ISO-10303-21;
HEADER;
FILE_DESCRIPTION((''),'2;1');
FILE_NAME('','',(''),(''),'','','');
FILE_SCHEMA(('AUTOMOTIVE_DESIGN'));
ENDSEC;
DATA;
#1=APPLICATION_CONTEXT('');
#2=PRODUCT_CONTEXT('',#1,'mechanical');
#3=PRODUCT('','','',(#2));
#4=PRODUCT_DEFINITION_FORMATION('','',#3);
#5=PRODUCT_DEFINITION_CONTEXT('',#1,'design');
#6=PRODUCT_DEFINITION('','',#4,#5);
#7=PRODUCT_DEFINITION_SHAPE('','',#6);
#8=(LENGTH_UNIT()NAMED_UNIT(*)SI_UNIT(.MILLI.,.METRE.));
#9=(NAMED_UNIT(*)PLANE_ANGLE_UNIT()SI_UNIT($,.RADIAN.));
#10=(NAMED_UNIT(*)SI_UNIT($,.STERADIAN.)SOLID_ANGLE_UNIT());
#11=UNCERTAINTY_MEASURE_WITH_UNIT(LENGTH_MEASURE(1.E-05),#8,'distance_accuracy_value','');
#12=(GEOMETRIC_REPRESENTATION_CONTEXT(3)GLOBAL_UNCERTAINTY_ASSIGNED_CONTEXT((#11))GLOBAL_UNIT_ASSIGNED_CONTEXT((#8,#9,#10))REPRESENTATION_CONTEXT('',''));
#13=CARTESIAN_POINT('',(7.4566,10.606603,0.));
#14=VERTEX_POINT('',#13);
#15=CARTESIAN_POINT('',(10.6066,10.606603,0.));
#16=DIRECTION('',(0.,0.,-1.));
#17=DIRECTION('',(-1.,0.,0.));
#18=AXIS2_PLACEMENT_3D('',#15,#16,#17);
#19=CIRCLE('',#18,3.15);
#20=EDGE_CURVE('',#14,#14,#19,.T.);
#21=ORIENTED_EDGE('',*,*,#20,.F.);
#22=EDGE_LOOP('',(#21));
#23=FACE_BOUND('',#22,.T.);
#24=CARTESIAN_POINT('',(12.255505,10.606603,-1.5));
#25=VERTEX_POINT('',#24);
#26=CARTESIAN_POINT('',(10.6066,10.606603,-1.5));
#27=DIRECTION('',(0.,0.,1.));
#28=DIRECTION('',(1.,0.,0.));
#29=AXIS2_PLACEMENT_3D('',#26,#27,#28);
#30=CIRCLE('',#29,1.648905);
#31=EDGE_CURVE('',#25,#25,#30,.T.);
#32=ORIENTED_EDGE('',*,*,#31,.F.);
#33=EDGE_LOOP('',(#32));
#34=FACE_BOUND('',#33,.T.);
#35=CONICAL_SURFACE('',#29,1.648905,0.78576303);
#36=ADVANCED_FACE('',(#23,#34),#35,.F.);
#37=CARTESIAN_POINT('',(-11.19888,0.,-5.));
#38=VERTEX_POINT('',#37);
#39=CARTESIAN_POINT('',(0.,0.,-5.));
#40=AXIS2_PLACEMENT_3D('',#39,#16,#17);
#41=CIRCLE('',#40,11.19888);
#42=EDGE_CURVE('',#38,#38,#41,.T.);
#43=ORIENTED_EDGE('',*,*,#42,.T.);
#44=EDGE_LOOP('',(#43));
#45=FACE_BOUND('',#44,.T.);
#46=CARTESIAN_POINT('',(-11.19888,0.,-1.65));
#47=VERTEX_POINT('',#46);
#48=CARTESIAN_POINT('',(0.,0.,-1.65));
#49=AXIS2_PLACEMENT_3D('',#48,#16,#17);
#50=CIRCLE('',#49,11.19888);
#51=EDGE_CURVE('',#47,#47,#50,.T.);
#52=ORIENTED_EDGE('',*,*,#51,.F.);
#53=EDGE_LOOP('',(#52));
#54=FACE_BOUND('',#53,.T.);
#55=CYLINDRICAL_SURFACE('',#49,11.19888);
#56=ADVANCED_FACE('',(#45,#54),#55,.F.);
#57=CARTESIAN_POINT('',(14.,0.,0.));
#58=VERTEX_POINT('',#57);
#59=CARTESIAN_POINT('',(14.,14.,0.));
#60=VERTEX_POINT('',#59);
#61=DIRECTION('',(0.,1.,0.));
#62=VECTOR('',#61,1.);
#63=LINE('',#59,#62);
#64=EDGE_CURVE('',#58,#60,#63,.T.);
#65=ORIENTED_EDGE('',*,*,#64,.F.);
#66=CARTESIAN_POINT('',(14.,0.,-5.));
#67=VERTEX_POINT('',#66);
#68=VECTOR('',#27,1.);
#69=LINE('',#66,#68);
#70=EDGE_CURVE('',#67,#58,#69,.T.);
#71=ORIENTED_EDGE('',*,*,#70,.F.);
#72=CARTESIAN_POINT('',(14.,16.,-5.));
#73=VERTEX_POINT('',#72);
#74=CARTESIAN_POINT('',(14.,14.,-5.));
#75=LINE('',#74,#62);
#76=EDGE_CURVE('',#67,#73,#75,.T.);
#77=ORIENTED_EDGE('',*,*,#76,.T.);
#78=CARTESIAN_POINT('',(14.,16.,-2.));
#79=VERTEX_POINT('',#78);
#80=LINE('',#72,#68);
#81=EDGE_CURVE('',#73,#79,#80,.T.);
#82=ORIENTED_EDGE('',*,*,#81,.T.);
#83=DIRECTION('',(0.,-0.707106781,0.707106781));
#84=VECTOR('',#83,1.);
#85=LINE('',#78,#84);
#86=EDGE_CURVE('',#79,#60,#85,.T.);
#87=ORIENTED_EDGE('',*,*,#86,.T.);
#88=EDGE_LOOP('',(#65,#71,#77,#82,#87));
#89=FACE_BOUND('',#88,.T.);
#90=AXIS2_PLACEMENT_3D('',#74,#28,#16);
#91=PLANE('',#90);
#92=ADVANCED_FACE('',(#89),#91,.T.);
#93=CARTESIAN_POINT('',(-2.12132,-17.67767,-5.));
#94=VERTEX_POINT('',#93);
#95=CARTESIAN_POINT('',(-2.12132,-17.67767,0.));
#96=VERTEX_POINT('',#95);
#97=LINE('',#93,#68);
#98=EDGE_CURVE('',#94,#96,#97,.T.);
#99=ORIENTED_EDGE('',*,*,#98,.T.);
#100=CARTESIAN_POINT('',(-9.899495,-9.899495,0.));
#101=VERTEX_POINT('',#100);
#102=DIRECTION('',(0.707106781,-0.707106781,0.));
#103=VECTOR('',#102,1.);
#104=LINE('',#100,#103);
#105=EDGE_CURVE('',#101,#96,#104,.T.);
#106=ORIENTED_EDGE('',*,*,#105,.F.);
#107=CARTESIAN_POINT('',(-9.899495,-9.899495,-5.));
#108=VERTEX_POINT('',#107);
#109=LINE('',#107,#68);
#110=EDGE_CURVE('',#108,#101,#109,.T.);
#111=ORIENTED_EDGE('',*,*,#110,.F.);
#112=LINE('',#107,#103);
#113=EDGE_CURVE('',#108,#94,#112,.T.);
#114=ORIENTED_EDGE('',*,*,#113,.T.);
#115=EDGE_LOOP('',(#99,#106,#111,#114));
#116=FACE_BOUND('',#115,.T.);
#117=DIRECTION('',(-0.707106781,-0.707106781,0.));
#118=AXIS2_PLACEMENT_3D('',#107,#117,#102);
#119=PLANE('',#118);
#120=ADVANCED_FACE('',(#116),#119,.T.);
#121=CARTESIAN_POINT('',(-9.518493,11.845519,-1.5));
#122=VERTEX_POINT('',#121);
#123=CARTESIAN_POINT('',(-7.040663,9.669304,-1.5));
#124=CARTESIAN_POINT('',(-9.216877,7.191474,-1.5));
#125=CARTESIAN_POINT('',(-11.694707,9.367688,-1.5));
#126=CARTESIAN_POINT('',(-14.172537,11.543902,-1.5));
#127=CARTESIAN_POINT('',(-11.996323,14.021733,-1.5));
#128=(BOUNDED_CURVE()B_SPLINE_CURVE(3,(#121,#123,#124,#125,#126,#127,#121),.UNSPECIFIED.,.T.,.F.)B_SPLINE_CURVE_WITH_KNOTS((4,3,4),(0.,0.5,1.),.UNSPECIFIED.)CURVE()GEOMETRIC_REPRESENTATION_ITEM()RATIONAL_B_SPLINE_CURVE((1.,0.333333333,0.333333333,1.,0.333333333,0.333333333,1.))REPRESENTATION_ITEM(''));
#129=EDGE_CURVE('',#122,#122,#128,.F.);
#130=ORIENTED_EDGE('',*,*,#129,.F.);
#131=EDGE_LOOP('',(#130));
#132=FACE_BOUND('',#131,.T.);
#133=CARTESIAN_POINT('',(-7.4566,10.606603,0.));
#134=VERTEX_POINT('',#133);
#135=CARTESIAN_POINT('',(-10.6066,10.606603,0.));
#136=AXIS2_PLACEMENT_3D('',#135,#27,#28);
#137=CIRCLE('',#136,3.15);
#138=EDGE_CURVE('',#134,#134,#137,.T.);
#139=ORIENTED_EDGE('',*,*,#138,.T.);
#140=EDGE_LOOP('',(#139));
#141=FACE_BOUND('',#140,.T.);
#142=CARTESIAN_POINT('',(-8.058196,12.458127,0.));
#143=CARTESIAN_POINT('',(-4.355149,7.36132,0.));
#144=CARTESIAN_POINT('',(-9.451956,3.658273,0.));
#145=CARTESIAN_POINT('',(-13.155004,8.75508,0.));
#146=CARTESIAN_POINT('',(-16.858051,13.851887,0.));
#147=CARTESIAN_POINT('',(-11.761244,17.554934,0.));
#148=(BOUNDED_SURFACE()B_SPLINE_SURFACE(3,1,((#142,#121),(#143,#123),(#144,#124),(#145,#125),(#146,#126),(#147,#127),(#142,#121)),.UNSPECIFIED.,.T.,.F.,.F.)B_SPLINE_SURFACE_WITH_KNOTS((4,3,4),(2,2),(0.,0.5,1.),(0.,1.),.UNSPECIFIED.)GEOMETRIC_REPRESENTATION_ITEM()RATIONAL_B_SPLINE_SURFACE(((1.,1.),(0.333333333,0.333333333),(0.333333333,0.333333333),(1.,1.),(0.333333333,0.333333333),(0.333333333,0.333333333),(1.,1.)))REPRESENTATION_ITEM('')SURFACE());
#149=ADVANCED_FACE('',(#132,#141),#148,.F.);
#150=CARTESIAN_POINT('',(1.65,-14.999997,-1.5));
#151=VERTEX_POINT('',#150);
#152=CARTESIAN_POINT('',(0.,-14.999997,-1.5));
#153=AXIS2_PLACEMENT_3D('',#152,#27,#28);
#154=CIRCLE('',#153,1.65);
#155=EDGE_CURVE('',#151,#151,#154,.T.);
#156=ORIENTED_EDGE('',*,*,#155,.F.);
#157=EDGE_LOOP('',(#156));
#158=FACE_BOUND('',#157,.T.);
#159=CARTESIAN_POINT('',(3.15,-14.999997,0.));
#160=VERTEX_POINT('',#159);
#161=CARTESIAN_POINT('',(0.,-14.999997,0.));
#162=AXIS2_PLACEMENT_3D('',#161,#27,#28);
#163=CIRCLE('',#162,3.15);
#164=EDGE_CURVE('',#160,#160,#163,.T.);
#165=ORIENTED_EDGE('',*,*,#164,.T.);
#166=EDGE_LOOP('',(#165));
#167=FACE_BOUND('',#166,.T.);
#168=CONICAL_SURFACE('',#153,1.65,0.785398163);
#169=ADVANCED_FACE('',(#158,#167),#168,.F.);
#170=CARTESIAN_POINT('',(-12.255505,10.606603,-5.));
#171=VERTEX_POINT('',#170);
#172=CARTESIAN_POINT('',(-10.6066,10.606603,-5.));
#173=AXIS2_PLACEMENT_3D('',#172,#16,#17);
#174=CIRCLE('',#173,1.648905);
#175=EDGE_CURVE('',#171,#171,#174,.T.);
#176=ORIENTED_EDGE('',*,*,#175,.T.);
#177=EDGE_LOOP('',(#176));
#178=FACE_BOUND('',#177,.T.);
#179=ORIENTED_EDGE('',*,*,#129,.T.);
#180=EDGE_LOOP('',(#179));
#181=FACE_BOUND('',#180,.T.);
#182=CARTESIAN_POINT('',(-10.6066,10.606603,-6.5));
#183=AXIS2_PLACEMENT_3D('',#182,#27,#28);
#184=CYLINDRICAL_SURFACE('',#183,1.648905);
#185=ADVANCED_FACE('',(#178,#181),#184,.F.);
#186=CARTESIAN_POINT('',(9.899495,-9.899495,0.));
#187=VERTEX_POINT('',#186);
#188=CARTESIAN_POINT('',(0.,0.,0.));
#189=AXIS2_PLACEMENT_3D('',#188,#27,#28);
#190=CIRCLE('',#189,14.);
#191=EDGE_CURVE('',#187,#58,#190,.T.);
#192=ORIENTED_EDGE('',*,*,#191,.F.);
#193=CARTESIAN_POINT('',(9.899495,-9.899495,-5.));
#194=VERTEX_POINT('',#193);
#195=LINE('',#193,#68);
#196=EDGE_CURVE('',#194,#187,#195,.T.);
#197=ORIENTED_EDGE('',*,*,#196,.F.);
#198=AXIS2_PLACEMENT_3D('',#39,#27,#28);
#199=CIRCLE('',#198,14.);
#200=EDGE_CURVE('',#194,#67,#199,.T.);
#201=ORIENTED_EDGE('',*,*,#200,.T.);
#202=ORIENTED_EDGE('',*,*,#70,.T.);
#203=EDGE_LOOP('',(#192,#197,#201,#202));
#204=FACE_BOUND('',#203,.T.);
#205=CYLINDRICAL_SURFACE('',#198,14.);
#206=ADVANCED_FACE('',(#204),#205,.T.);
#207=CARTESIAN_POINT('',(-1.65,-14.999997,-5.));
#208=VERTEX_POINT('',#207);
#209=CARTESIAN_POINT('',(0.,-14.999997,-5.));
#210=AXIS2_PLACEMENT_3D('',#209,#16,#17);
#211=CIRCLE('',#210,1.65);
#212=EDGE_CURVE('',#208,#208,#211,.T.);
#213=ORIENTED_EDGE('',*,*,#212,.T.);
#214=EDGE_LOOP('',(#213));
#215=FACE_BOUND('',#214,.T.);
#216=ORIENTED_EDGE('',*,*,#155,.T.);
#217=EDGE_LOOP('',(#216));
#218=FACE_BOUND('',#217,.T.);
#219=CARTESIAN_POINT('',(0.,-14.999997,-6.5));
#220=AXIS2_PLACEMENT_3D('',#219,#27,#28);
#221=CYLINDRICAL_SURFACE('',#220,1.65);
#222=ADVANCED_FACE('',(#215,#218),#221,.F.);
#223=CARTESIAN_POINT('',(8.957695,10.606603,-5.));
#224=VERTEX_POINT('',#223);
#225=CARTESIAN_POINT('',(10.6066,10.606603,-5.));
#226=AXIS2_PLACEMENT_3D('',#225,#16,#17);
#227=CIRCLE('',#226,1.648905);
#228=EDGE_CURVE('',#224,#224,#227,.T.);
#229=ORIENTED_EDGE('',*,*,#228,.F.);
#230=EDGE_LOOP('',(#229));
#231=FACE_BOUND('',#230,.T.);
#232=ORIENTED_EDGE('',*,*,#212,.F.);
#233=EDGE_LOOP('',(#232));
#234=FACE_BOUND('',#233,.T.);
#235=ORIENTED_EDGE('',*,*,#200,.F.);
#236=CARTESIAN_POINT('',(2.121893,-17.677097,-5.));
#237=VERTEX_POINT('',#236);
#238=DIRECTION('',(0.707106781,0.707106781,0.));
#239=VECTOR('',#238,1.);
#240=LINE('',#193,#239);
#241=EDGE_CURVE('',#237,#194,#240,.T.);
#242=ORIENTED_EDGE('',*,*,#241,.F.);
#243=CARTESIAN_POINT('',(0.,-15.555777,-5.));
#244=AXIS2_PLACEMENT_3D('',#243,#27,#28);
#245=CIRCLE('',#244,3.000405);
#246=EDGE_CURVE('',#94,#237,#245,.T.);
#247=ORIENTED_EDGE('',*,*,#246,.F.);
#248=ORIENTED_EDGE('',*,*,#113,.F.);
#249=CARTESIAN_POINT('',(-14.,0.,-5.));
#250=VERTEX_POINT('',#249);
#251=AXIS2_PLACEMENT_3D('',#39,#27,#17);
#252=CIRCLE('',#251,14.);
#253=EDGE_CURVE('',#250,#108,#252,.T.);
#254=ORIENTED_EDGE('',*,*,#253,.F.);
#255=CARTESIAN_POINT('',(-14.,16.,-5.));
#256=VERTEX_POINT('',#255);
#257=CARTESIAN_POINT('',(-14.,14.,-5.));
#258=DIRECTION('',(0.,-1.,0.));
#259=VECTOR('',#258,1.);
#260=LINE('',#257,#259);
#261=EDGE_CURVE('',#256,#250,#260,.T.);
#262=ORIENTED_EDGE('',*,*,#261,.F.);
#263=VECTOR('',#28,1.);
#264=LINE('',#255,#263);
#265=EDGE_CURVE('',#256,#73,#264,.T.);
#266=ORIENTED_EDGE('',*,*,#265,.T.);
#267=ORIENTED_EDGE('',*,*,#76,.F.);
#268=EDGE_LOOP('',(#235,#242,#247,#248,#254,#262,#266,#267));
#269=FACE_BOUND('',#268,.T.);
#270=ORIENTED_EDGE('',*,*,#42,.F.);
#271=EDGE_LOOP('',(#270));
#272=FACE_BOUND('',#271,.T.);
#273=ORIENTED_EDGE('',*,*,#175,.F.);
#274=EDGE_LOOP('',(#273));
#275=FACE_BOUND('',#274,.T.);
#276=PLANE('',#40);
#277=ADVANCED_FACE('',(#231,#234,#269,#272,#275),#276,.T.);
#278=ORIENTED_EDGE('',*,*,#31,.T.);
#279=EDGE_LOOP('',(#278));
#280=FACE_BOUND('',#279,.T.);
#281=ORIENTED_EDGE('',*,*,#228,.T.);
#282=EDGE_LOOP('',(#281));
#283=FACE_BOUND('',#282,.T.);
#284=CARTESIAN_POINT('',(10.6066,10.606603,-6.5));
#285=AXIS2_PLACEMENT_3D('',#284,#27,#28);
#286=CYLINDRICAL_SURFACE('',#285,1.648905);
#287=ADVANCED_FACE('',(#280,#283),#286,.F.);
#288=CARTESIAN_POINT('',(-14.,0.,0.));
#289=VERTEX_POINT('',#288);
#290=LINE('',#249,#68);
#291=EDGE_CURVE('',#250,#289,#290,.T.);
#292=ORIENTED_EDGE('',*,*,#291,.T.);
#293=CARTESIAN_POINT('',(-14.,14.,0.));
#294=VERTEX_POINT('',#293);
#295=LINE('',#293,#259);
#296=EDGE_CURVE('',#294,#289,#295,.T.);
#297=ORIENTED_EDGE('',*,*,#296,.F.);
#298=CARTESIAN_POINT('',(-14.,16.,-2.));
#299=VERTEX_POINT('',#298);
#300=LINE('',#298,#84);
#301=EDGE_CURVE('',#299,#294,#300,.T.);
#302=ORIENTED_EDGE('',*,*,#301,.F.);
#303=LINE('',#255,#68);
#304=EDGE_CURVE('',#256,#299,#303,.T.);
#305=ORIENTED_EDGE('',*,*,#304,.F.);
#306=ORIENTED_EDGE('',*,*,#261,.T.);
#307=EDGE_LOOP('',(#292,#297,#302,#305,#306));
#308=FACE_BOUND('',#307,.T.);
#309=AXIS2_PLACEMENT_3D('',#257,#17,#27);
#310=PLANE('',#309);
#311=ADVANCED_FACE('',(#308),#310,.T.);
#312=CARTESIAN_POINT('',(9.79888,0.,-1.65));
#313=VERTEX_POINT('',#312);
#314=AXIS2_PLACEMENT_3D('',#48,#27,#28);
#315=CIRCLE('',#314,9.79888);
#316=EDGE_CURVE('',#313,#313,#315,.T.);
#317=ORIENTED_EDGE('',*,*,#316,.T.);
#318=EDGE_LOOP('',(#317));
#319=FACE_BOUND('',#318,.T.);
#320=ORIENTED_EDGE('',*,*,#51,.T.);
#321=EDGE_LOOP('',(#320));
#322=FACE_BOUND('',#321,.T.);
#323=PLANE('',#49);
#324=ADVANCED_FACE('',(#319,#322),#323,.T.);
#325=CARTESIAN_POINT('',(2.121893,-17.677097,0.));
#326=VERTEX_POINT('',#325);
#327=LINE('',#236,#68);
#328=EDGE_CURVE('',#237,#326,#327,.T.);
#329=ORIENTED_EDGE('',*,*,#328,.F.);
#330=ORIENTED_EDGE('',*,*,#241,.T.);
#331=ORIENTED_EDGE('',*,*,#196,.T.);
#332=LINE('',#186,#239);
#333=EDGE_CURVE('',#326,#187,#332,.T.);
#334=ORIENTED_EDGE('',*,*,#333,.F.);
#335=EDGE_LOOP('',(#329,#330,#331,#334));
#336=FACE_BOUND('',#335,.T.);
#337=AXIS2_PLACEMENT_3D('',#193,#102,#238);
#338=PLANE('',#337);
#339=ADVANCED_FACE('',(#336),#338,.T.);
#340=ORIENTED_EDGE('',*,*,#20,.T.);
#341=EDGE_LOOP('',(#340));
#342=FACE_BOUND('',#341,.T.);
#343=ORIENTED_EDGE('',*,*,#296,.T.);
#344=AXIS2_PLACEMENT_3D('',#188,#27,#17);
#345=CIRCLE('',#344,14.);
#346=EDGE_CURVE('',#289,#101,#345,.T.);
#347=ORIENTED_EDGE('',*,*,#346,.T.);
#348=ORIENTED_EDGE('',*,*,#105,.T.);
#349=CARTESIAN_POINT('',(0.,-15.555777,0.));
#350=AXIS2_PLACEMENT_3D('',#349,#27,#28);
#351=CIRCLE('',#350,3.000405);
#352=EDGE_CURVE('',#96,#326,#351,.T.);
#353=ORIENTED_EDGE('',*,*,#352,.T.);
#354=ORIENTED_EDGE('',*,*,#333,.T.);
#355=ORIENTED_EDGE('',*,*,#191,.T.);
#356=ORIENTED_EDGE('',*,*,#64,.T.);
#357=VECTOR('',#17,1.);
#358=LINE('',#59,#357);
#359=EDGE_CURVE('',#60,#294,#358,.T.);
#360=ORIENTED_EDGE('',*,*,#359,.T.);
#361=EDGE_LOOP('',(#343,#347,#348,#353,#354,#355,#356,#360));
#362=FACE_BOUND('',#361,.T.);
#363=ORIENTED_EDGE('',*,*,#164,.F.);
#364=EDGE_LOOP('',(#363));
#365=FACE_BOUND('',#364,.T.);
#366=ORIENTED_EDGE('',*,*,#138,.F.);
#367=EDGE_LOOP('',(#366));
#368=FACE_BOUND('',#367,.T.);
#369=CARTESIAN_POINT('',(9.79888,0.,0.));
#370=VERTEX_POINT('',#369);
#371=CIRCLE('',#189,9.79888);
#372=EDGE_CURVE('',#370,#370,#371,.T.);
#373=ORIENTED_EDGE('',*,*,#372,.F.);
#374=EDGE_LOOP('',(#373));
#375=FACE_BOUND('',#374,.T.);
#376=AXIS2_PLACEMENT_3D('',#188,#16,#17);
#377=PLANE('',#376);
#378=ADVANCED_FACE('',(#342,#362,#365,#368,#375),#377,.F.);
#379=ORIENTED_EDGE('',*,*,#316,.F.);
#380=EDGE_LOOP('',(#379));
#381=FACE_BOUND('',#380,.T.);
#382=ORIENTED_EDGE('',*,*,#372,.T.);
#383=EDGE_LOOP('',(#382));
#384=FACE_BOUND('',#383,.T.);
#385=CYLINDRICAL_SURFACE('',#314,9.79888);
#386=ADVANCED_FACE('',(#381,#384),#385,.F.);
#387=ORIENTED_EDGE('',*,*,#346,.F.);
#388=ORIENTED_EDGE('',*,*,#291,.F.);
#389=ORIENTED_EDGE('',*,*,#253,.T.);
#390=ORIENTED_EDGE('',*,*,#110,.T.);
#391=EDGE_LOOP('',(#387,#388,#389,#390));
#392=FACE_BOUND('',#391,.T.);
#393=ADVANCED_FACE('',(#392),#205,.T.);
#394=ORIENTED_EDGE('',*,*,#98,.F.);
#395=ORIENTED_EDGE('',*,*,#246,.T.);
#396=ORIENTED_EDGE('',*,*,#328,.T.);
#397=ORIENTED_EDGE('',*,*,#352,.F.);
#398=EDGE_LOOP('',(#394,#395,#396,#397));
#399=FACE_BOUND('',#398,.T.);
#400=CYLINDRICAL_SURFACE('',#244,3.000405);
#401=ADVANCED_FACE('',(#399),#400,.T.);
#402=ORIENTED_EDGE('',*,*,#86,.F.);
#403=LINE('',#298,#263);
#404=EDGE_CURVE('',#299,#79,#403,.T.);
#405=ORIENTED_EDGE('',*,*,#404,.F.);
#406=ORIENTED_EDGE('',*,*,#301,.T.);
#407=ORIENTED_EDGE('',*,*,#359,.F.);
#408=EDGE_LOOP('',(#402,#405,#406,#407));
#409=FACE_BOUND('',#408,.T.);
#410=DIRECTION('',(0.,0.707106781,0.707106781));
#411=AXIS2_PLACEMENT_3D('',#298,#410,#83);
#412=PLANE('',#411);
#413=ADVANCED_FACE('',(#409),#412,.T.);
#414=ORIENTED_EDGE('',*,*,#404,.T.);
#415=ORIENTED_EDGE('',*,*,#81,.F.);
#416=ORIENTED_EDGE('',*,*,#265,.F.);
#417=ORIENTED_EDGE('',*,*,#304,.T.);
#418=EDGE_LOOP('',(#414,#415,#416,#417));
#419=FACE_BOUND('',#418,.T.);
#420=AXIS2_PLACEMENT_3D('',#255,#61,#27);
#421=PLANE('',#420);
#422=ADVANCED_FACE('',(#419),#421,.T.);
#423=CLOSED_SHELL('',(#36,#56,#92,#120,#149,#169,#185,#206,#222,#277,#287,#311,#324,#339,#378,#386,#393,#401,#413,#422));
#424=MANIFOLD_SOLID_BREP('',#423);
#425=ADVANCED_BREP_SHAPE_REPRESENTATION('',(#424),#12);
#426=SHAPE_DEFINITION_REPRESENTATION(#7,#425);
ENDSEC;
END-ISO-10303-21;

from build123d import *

# Parameters (mm, degrees)
EXTRUDE_3_DEPTH     = 5
SKETCH_1_R          = 9.79888
CUT_EXTRUDE_1_DEPTH = 1.65
SKETCH_1_9_R        = 3.15
SKETCH_3_8_R        = 1.65
SKETCH_3_9_R        = 1.648905
SKETCH_3_9_R_2      = 1.65
CUT_EXTRUDE_2_DEPTH = 5
EXTRUDE_4_DEPTH     = 28
SKETCH_10_R         = 11.19888
CUT_EXTRUDE_3_DEPTH = 3.35


with BuildPart() as part:
    # 草图7 → 凸台-拉伸3 (new body)
    with BuildSketch(Plane.XY):
        with BuildLine():
            Line((14, 14), (-14, 14))
            Line((-14, 14), (-14, 0))
            ThreePointArc((-14, 0), (-12.934313455, -5.357568053), (-9.899494937, -9.899494937))
            Line((-9.899494937, -9.899494937), (-2.121320344, -17.67766953))
            ThreePointArc((-2.121320344, -17.67766953), (0.000404905, -18.556181469), (2.121892965, -17.677096908))
            Line((2.121892965, -17.677096908), (9.899494937, -9.899494937))
            ThreePointArc((9.899494937, -9.899494937), (12.934313455, -5.357568053), (14, 0))
            Line((14, 0), (14, 14))
        make_face()
    extrude(amount=-EXTRUDE_3_DEPTH)

    # 草图1 → 切除-拉伸1 (cut)
    with BuildSketch(Plane.XY):
        Circle(SKETCH_1_R)
    extrude(amount=-CUT_EXTRUDE_1_DEPTH, mode=Mode.SUBTRACT)

    # 切除-放样1: read off the stored shape, not the designer's step
    # 切除-放样1 outline → 切除-放样1 (revolve, cut)
    with BuildSketch(Plane(origin=(10.6066, 10.606603436, 0), x_dir=(1, 0, 0), z_dir=(0, -1, 0))):
        Polygon((0, 0), (0, -1.5), (1.648905, -1.5), (3.15, 0), align=None)
    revolve(axis=Axis((10.6066, 10.606603436, 0), (0, 0, 1)), mode=Mode.SUBTRACT)

    # 切除-放样2: read off the stored shape, not the designer's step
    # 切除-放样2: loft between two sections, ruled curve by curve
    loft_2_from = [
        Edge.make_bspline([(-8.058196468, 12.45812698, 0), (-4.355149378, 7.361319916, 0), (-9.451956443, 3.658272826, 0), (-13.155003532, 8.755079891, 0), (-16.858050622, 13.851886955, 0), (-11.761243557, 17.554934045, 0), (-8.058196468, 12.45812698, 0)], [0, 0, 0, 0, 0.5, 0.5, 0.5, 1, 1, 1, 1], 3, [1, 0.333333333, 0.333333333, 1, 0.333333333, 0.333333333, 1]),
    ]
    loft_2_to = [
        Edge.make_bspline([(-9.518492924, 11.845518562, -1.5), (-7.040662671, 9.669304411, -1.5), (-9.216876823, 7.191474158, -1.5), (-11.694707076, 9.367688309, -1.5), (-14.172537329, 11.543902461, -1.5), (-11.996323177, 14.021732714, -1.5), (-9.518492924, 11.845518562, -1.5)], [0, 0, 0, 0, 0.5, 0.5, 0.5, 1, 1, 1, 1], 3, [1, 0.333333333, 0.333333333, 1, 0.333333333, 0.333333333, 1]),
    ]
    loft_2 = Solid(Shell([*[Face.make_surface_from_curves(loft_2_from[k], loft_2_to[k]) for k in range(1)], Face(Wire(loft_2_from)), Face(Wire(loft_2_to))]))
    add(loft_2, mode=Mode.SUBTRACT)

    # 草图1<9> → 切除-放样3 section 0
    with BuildSketch(Plane.XY):
        with Locations((0, -14.999996564)):
            Circle(SKETCH_1_9_R)
    # 草图3<8> → 切除-放样3 section 1
    with BuildSketch(Plane.XY.offset(-1.5)):
        with Locations((0, -14.999996564)):
            Circle(SKETCH_3_8_R)
    loft(mode=Mode.SUBTRACT)

    # 草图3<9> → 切除-拉伸2 (cut)
    with BuildSketch(Plane.XY.offset(-1.5)):
        with Locations(Location((-10.6066, 10.606603436, 0), (0, 0, 48.708))):
            Circle(SKETCH_3_9_R)
        with Locations((10.6066, 10.606603436)):
            Circle(SKETCH_3_9_R)
        with Locations((0, -14.999996564)):
            Circle(SKETCH_3_9_R_2)
    extrude(amount=-CUT_EXTRUDE_2_DEPTH, mode=Mode.SUBTRACT)

    # 草图9 → 凸台-拉伸4 (add)
    with BuildSketch(Plane(origin=(14, 0, 0), x_dir=(0, 0, -1), z_dir=(1, 0, 0))):
        Polygon((5, 14), (5, 16), (2, 16), (0, 14), align=None)
    extrude(amount=-EXTRUDE_4_DEPTH)

    # 草图10 → 切除-拉伸3 (cut)
    with BuildSketch(Plane(origin=(0, 0, -5), x_dir=(-1, 0, 0), z_dir=(0, 0, -1))):
        Circle(SKETCH_10_R)
    extrude(amount=-CUT_EXTRUDE_3_DEPTH, mode=Mode.SUBTRACT)


solid = part.part
